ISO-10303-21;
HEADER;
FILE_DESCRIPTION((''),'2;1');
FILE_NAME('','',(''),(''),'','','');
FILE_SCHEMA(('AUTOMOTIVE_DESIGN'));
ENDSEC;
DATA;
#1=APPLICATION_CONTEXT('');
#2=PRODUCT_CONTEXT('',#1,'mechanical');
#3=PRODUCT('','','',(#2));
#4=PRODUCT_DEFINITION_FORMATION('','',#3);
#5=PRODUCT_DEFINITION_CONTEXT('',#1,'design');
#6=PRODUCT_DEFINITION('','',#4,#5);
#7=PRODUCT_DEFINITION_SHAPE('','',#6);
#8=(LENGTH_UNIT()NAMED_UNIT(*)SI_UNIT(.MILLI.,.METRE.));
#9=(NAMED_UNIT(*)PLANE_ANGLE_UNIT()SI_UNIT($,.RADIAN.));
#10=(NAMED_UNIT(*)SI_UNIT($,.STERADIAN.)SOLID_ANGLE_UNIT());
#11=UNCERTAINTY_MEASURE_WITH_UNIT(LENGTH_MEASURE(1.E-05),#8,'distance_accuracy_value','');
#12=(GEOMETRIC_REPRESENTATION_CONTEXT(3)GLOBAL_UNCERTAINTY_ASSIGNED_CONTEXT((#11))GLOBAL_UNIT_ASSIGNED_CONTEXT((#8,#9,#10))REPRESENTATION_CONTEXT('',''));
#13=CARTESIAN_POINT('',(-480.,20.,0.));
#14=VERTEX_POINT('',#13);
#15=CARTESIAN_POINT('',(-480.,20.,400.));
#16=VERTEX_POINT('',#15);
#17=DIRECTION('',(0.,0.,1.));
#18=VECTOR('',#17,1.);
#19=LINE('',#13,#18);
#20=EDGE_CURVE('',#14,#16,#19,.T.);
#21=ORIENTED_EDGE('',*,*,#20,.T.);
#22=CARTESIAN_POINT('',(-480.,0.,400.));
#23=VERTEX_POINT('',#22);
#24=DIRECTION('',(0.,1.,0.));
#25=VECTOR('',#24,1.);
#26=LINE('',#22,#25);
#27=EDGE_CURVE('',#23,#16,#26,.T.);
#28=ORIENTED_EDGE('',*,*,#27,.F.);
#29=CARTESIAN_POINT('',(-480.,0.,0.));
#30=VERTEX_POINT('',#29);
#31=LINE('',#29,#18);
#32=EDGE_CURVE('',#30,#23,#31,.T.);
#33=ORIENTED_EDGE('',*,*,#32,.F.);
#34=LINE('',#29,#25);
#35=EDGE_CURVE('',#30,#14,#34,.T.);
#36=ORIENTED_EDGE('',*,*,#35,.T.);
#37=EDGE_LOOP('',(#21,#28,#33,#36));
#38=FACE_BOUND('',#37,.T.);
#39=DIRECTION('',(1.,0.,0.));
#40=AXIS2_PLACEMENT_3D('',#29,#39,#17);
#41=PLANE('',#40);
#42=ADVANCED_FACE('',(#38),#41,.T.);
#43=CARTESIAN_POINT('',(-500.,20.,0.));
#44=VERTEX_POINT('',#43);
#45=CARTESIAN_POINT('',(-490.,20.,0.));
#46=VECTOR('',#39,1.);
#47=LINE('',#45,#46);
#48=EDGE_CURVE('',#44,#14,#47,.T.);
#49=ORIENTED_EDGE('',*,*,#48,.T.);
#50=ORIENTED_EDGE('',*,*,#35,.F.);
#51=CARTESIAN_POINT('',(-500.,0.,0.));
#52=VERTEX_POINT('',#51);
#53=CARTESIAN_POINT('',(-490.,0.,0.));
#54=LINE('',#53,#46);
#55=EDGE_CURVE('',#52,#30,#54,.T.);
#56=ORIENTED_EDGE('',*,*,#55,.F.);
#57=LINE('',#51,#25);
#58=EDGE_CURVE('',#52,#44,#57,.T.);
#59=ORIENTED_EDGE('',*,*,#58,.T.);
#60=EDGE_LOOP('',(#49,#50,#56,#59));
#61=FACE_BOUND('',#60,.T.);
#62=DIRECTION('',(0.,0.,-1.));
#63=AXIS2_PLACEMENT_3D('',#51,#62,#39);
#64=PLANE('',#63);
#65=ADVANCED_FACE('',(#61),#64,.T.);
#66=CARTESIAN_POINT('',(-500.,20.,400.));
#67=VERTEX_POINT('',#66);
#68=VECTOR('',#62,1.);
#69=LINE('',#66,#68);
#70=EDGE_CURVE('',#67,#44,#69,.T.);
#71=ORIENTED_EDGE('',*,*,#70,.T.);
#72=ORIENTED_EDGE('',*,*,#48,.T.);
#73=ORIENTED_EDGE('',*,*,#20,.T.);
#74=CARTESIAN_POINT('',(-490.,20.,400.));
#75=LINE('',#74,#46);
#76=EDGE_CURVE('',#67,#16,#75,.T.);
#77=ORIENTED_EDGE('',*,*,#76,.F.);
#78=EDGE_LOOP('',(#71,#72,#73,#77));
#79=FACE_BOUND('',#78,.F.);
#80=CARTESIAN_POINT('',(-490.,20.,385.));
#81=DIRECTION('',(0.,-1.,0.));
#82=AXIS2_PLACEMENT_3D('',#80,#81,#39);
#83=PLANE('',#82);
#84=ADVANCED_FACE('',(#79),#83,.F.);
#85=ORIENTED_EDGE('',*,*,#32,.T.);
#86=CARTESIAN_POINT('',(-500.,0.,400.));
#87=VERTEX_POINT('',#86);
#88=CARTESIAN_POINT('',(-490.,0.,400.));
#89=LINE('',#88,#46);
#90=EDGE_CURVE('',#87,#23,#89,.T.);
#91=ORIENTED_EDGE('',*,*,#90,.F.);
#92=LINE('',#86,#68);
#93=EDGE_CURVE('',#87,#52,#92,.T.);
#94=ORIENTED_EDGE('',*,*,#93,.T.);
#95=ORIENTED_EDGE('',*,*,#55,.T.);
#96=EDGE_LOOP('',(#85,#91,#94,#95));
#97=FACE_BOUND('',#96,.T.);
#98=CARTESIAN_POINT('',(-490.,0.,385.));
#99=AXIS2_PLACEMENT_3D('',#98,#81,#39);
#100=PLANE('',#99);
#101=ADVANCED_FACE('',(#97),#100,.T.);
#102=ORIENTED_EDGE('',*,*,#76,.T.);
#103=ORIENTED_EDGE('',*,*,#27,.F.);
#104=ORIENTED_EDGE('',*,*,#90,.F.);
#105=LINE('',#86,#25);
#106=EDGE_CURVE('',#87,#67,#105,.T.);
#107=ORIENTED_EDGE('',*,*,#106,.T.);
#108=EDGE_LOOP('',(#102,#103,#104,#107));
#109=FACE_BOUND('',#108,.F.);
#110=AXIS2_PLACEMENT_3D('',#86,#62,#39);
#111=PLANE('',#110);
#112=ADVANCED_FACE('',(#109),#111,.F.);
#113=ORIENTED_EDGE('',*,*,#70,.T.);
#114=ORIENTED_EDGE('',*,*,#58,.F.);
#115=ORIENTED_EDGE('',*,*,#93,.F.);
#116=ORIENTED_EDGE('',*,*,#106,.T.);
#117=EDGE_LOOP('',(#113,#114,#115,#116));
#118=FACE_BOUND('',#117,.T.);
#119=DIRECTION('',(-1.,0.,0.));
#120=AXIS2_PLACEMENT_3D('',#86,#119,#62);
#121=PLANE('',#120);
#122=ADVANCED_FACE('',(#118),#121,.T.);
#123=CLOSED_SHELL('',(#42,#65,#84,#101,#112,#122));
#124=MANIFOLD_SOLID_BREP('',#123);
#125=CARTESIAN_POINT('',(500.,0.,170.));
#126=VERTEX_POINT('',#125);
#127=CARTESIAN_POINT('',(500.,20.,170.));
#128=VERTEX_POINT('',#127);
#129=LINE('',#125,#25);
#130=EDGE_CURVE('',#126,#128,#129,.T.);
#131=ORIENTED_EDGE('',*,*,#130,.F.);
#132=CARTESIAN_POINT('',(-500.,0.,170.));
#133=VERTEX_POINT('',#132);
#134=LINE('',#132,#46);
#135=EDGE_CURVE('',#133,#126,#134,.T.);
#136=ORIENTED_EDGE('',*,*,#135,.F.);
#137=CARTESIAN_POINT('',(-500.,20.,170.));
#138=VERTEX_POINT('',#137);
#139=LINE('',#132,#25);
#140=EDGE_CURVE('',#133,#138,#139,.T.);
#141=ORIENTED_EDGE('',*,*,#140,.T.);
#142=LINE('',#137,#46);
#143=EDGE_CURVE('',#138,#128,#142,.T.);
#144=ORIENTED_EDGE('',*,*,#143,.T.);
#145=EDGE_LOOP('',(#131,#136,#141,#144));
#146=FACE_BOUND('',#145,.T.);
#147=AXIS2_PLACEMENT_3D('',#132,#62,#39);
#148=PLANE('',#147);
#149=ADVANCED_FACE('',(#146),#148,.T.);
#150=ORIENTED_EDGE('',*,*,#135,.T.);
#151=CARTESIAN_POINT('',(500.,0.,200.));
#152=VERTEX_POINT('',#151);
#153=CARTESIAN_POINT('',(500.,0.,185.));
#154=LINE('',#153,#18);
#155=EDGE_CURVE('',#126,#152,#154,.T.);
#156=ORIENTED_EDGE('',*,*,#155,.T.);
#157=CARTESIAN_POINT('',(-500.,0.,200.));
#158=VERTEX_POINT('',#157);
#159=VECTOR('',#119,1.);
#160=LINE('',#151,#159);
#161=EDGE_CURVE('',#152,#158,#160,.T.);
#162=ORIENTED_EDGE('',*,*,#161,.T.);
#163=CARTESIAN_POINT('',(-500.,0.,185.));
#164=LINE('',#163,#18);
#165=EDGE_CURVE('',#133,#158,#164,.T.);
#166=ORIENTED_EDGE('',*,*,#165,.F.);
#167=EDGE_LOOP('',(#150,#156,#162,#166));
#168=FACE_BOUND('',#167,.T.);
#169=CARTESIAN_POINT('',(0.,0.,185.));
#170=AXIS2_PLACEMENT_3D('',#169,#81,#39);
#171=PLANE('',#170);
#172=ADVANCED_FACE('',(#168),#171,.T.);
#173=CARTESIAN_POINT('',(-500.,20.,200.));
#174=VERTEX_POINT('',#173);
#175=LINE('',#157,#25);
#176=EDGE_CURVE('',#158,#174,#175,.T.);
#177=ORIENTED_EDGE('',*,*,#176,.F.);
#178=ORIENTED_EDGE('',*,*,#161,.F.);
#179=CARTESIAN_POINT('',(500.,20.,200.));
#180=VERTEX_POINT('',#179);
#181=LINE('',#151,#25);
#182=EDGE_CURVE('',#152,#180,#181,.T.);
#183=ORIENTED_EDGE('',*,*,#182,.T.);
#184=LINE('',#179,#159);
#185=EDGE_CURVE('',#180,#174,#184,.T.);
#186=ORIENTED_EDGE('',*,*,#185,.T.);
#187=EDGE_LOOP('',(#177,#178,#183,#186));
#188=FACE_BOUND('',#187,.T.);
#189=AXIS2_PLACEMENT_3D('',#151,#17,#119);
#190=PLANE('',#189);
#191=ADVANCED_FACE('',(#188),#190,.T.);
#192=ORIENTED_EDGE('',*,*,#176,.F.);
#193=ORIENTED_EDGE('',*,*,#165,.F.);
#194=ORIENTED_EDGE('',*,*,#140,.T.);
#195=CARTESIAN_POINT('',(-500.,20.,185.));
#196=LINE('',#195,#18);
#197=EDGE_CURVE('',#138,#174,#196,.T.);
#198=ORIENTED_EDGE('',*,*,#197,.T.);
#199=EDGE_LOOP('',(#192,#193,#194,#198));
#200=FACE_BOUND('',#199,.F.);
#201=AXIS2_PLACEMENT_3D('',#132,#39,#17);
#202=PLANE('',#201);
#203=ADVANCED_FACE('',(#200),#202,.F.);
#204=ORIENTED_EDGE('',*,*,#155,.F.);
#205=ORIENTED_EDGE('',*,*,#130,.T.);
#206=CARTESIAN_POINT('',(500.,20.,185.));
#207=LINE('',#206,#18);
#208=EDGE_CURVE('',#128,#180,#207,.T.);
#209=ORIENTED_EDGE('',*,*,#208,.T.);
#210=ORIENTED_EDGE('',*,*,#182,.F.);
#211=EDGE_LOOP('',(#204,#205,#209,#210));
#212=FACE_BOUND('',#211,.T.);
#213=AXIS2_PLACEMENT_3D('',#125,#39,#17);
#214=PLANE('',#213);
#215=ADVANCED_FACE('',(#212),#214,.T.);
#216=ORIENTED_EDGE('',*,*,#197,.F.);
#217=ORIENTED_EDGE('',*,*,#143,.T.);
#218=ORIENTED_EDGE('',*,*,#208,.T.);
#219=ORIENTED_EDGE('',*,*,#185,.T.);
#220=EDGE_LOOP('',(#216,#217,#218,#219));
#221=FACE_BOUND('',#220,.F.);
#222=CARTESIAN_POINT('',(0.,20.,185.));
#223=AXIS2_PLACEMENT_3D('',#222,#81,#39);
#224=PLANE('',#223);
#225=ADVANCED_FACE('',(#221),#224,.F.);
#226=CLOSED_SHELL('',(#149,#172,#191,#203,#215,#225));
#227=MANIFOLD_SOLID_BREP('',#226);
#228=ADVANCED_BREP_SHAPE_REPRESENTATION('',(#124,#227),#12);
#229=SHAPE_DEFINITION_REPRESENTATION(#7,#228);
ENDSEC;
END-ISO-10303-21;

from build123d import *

# Parameters (mm, degrees)
F0_W     = 20
F0_H     = 30
F0_H_2   = 170
F1_DEPTH = 20
F2_DEPTH = 20


# Not quite as in the source:
# - a feature names something its author has since deleted; it is built from what else it names


with BuildPart() as f1:
    # F0 (on Front) → F1 (new body)
    with BuildSketch(Plane.XZ):
        with Locations((-490, 385)):
            Rectangle(F0_W, F0_H)
        Polygon((-480, 370), (-500, 370), (-500, 200), (-480, 200), (-480, 355), align=None)
        with Locations((-490, 85)):
            Rectangle(F0_W, F0_H_2)
        with Locations((-490, 185)):
            Rectangle(F0_W, F0_H)
    extrude(amount=-F1_DEPTH)


with BuildPart() as f2:
    # F0 (on Front) → F2 (new body)
    with BuildSketch(Plane.XZ):
        Polygon((0, 200), (-480, 200), (-480, 170), (0, 170), (480, 170), (480, 200), align=None)
        with Locations((-490, 185)):
            Rectangle(F0_W, F0_H)
        with Locations((490, 185)):
            Rectangle(F0_W, F0_H)
    extrude(amount=-F2_DEPTH)


solid = Compound([f1.part, f2.part])
